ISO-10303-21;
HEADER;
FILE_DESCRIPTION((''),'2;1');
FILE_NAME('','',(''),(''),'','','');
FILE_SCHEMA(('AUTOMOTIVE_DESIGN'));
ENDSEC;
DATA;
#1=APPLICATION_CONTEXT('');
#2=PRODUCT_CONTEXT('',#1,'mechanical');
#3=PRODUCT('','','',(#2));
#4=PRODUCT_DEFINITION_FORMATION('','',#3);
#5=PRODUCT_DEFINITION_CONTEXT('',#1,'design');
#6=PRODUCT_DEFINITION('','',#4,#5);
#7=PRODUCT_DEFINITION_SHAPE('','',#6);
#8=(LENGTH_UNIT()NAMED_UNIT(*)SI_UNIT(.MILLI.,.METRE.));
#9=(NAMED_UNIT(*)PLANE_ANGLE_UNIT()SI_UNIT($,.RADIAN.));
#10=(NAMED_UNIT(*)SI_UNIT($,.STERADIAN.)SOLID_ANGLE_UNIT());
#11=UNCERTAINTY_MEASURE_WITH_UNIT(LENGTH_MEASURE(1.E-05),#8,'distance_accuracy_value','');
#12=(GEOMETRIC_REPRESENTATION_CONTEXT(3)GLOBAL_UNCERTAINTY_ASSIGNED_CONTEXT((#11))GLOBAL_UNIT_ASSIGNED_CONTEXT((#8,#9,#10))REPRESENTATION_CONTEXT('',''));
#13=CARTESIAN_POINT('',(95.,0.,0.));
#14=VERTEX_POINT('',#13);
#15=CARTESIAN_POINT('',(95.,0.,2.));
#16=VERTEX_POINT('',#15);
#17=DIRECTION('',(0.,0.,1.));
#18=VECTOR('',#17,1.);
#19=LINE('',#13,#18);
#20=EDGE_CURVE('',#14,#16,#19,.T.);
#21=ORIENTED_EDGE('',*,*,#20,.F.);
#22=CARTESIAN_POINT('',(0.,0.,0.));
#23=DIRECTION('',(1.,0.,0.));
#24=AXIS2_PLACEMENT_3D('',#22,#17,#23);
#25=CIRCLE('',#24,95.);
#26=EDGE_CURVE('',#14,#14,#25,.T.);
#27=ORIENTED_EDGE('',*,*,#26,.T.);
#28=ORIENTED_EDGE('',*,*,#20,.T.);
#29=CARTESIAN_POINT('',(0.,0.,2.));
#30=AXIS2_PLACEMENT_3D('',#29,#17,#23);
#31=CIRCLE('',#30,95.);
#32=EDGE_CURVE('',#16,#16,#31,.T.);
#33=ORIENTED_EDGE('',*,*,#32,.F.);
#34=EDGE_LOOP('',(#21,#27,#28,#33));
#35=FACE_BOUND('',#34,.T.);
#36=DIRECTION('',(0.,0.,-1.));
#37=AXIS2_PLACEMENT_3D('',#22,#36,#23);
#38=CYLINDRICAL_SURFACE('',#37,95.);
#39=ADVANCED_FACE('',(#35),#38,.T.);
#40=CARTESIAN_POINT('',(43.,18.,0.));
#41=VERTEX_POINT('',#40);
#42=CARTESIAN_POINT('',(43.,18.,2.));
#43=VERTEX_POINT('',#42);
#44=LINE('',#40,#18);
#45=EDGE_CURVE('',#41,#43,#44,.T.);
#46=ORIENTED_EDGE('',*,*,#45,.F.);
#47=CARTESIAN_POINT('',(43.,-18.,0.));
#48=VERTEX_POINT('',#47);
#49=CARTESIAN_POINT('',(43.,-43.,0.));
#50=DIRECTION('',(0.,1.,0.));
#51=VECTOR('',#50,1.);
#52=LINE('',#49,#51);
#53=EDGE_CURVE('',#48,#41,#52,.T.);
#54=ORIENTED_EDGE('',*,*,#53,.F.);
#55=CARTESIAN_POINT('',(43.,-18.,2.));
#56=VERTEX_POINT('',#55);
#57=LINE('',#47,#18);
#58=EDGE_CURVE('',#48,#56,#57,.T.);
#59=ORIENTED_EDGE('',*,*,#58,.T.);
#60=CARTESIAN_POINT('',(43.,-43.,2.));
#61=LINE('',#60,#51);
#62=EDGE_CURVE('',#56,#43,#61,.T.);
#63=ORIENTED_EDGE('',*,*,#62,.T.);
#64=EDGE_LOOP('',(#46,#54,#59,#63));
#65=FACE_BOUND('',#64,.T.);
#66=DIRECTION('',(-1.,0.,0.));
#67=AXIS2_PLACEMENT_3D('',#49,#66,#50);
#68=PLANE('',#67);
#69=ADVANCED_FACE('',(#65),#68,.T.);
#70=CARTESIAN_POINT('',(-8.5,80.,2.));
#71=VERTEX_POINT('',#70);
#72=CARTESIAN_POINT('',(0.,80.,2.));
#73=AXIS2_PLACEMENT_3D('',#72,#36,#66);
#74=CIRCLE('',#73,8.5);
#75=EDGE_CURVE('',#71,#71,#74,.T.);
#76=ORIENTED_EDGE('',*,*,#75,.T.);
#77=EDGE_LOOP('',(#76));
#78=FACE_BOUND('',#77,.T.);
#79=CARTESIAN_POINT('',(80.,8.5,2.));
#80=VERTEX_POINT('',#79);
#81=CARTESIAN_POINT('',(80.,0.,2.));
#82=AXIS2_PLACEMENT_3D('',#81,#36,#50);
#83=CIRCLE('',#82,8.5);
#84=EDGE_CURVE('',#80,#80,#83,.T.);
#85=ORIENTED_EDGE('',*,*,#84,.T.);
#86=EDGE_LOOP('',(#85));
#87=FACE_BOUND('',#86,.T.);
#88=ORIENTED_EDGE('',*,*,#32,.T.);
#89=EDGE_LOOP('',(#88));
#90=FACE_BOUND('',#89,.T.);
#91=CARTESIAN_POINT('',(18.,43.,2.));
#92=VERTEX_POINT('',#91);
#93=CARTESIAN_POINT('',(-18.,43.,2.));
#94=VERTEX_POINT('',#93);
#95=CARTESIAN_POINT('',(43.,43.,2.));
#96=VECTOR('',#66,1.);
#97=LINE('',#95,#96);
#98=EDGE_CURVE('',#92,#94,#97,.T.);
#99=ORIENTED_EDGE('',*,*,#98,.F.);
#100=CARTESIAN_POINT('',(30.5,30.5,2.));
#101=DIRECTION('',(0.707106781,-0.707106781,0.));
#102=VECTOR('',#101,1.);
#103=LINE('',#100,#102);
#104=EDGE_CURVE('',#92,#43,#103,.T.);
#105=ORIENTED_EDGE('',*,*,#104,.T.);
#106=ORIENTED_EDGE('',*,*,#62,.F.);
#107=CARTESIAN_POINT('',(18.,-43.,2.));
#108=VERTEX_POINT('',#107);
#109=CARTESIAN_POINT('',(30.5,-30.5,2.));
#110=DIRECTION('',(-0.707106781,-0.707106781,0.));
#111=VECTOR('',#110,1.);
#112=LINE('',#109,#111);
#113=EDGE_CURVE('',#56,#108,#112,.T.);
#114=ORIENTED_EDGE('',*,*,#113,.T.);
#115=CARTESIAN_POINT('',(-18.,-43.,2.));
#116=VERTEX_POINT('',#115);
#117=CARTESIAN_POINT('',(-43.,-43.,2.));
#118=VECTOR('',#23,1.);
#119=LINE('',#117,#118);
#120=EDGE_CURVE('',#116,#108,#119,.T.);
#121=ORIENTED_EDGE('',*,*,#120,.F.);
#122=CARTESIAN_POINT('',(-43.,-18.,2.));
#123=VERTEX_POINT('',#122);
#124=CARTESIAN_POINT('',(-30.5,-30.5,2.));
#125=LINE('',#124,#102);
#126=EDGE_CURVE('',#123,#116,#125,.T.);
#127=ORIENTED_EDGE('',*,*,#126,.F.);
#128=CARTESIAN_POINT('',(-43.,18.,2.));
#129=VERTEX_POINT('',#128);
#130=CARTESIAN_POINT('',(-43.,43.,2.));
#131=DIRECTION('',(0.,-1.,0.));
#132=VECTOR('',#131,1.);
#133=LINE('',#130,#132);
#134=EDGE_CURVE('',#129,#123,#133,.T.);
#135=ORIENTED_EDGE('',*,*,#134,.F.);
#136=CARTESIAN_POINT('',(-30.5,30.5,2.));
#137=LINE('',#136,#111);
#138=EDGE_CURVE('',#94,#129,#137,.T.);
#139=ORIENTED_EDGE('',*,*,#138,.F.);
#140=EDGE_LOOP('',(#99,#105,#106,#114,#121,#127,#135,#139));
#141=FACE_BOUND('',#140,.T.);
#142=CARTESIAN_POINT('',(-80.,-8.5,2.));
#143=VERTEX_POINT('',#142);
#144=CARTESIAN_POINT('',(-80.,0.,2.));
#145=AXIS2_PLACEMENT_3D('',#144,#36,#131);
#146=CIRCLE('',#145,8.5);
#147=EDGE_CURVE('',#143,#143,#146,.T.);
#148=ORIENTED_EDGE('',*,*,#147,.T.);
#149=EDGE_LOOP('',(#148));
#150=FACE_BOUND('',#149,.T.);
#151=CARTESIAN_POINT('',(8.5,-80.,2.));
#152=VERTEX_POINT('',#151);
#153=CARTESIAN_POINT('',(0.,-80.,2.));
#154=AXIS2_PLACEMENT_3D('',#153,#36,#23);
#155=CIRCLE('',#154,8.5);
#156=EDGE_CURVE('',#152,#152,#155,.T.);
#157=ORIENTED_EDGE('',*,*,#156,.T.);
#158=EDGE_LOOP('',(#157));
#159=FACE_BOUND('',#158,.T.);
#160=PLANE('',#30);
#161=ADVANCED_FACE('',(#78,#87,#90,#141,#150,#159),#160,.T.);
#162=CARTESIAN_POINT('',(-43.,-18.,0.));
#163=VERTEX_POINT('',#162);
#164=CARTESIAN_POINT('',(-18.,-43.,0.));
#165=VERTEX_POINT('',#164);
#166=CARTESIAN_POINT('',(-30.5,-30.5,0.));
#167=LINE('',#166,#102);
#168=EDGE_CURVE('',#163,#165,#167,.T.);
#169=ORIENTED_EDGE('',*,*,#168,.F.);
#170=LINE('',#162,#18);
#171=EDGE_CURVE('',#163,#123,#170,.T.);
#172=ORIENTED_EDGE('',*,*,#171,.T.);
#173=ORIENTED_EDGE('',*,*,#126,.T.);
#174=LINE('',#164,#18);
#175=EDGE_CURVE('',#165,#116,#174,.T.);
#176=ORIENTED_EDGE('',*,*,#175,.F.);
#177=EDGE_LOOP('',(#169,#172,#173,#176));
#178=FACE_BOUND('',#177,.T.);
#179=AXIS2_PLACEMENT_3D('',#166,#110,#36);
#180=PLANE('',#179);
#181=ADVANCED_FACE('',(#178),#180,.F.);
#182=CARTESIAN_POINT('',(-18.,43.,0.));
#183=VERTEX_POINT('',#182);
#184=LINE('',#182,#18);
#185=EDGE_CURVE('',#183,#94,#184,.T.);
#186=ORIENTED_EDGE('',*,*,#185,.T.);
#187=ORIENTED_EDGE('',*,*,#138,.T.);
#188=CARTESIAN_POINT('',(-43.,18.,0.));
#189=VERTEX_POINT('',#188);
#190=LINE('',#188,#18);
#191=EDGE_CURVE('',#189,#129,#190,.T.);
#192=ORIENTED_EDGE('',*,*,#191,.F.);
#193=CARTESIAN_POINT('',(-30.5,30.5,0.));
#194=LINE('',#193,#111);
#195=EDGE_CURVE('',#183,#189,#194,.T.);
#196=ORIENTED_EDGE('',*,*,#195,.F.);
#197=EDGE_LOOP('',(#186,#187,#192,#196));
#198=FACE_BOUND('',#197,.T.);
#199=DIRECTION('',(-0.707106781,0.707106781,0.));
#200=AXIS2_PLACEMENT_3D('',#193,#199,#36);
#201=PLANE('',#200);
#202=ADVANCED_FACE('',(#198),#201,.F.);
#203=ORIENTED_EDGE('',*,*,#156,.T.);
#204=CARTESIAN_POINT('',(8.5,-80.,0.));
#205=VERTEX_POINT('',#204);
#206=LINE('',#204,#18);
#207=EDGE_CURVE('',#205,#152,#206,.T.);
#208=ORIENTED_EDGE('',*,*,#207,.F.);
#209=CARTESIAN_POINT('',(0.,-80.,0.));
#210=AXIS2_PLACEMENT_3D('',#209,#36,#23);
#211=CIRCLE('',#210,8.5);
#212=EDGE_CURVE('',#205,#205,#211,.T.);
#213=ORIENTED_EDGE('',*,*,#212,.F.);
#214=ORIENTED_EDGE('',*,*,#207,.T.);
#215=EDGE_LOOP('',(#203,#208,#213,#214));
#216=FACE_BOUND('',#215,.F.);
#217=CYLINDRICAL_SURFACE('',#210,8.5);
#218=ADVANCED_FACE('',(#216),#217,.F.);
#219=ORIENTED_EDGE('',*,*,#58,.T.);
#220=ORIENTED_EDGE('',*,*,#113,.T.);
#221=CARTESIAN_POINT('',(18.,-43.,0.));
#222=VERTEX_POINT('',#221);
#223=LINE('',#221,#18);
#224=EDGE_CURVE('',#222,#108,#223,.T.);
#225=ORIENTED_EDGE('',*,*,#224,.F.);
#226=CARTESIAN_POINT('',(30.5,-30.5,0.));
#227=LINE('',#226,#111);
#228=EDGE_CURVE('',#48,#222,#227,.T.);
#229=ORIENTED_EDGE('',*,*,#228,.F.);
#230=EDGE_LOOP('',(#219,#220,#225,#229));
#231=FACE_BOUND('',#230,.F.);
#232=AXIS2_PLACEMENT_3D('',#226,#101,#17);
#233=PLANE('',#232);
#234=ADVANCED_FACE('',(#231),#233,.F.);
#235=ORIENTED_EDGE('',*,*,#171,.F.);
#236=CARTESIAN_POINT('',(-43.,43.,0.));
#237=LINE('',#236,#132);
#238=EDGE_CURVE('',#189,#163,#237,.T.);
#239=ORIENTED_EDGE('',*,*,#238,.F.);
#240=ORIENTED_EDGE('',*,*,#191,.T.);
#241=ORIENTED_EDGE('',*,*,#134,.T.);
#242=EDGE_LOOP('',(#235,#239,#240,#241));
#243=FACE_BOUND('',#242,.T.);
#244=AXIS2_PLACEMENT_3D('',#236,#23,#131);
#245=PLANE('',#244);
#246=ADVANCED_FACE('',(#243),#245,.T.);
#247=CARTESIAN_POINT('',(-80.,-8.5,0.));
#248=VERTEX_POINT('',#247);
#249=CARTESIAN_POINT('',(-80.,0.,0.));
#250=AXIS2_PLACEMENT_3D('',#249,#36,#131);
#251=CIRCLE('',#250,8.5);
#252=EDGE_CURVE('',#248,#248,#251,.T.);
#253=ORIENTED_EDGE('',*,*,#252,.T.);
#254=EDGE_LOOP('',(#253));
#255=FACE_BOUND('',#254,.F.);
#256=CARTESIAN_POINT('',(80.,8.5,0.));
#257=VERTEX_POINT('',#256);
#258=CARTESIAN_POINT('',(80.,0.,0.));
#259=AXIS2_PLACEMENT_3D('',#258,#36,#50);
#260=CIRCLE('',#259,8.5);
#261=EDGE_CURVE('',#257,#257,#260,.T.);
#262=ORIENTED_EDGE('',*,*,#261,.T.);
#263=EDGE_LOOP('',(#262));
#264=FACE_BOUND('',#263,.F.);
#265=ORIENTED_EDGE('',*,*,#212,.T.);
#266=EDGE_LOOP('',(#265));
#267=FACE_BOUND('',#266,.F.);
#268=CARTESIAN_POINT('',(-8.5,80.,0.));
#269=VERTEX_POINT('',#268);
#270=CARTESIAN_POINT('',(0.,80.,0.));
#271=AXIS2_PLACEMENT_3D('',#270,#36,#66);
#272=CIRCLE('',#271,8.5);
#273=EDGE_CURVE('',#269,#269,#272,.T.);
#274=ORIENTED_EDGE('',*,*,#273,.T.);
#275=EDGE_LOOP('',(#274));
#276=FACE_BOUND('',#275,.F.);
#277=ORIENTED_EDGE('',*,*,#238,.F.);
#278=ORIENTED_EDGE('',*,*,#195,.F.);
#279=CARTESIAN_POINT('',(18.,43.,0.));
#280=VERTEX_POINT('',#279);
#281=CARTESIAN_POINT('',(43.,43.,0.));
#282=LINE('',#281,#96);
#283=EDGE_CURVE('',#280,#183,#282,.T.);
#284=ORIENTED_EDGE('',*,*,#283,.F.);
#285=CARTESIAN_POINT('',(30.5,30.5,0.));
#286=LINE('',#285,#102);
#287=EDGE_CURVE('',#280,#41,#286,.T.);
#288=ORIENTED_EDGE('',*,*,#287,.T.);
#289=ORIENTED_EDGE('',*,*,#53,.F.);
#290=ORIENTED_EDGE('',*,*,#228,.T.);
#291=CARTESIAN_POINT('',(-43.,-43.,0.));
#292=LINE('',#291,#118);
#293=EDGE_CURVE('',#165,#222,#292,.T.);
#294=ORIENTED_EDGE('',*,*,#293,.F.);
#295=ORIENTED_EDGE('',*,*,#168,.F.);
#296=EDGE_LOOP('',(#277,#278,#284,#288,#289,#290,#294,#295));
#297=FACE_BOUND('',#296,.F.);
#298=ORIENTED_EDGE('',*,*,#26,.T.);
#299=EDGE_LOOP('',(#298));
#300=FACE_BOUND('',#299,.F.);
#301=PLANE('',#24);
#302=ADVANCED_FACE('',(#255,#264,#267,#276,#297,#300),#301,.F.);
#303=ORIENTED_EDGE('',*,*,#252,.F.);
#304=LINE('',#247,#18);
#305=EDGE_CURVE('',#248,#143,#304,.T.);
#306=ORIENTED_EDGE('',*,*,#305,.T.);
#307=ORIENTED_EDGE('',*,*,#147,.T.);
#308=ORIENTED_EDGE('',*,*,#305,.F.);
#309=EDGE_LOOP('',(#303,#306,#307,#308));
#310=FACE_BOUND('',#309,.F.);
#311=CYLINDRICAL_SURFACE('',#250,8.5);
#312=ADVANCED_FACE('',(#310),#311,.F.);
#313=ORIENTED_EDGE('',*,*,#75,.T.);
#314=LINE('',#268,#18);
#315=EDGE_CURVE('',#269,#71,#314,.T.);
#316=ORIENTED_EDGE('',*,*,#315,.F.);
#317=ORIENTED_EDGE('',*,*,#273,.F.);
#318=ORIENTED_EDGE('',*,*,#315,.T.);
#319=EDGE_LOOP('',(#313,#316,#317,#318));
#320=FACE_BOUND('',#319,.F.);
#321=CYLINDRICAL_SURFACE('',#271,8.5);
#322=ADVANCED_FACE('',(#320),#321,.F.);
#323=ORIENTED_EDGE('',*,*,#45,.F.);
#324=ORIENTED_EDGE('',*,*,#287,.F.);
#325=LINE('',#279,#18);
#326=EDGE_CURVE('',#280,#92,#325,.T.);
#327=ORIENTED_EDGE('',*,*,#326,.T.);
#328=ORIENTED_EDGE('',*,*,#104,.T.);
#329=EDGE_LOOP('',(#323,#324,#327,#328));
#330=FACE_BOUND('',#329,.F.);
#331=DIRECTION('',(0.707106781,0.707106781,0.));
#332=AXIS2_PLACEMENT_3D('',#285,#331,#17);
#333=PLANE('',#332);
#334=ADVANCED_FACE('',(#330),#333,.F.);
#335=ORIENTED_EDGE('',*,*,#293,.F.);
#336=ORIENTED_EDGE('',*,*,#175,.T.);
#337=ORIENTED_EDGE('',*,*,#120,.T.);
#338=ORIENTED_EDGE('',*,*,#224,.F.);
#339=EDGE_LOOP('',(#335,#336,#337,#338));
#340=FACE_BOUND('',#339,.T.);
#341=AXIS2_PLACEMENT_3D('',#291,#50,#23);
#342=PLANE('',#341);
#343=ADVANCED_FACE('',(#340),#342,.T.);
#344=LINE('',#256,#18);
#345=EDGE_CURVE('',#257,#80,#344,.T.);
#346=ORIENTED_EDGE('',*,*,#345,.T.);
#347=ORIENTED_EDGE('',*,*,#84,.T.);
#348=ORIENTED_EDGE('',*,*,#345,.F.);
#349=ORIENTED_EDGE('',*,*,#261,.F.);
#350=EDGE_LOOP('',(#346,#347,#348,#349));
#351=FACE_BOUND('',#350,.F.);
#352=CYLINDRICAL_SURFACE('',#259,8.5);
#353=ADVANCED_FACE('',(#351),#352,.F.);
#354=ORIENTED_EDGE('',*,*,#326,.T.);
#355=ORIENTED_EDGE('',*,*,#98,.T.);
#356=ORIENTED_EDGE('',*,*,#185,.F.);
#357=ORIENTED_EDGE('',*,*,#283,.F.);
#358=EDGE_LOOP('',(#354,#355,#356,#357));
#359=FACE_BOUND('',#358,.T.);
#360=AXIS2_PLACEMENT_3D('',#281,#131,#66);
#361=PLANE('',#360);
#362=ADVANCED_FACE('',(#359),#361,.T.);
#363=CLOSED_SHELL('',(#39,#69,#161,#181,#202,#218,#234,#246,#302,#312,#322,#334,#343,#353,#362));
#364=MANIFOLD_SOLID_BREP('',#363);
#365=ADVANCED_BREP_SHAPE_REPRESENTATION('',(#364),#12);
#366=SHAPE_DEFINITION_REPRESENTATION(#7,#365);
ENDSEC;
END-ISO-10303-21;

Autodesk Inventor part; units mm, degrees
ref_plane "YZ Plane" through (0, 0, 0) normal (1, 0, 0) x (0, 1, 0)
ref_plane "XZ Plane" through (0, 0, 0) normal (0, 1, 0) x (-1, 0, 0)
ref_plane "XY Plane" through (0, 0, 0) normal (0, 0, 1) x (1, 0, 0)
sketch "Sketch1" plane through (0, 0, 0) normal (0, 0, 1) x (1, 0, 0)
  circle A0 centre (0, 0) radius 95
  line L0 (43, 43) -> (-43, 43)
  line L1 (-43, 43) -> (-43, -43)
  line L2 (-43, -43) -> (43, -43)
  line L3 (43, -43) -> (43, 43)
  line L4 (43, 43) -> (-43, -43) construction
  line L5 (-43, 43) -> (43, -43) construction
  dimension "d157" = 190
  dimension "d158" = 86
  dimension "d159" = 86
extrude "Plate5" add sketch "Sketch1" along normal blind 2
sketch "Sketch7" plane through (0, 0, 0) normal (0, 0, -1) x (-1, 0, 0)
  circle A0 centre (0, 80) radius 8.5
  point P0 (0, 0)
  dimension "d160" = 17
  dimension "d161" = 80
extrude "Cut1" cut sketch "Sketch7" against normal blind 2
pattern_circular "Circular Pattern1" count 4 over 360 about axis through (0, 0, -10) along (0, 0, 1) of "Cut1"
chamfer "Corner Chamfer2" distance 25 angle 45 4 edges at (-43, -43, 1) (43, -43, 1) (-43, 43, 1) (43, 43, 1)
properties part number "SLM 1792  funnel FLANGE 1200 50-90_1000x90" material "Stainless Steel"
